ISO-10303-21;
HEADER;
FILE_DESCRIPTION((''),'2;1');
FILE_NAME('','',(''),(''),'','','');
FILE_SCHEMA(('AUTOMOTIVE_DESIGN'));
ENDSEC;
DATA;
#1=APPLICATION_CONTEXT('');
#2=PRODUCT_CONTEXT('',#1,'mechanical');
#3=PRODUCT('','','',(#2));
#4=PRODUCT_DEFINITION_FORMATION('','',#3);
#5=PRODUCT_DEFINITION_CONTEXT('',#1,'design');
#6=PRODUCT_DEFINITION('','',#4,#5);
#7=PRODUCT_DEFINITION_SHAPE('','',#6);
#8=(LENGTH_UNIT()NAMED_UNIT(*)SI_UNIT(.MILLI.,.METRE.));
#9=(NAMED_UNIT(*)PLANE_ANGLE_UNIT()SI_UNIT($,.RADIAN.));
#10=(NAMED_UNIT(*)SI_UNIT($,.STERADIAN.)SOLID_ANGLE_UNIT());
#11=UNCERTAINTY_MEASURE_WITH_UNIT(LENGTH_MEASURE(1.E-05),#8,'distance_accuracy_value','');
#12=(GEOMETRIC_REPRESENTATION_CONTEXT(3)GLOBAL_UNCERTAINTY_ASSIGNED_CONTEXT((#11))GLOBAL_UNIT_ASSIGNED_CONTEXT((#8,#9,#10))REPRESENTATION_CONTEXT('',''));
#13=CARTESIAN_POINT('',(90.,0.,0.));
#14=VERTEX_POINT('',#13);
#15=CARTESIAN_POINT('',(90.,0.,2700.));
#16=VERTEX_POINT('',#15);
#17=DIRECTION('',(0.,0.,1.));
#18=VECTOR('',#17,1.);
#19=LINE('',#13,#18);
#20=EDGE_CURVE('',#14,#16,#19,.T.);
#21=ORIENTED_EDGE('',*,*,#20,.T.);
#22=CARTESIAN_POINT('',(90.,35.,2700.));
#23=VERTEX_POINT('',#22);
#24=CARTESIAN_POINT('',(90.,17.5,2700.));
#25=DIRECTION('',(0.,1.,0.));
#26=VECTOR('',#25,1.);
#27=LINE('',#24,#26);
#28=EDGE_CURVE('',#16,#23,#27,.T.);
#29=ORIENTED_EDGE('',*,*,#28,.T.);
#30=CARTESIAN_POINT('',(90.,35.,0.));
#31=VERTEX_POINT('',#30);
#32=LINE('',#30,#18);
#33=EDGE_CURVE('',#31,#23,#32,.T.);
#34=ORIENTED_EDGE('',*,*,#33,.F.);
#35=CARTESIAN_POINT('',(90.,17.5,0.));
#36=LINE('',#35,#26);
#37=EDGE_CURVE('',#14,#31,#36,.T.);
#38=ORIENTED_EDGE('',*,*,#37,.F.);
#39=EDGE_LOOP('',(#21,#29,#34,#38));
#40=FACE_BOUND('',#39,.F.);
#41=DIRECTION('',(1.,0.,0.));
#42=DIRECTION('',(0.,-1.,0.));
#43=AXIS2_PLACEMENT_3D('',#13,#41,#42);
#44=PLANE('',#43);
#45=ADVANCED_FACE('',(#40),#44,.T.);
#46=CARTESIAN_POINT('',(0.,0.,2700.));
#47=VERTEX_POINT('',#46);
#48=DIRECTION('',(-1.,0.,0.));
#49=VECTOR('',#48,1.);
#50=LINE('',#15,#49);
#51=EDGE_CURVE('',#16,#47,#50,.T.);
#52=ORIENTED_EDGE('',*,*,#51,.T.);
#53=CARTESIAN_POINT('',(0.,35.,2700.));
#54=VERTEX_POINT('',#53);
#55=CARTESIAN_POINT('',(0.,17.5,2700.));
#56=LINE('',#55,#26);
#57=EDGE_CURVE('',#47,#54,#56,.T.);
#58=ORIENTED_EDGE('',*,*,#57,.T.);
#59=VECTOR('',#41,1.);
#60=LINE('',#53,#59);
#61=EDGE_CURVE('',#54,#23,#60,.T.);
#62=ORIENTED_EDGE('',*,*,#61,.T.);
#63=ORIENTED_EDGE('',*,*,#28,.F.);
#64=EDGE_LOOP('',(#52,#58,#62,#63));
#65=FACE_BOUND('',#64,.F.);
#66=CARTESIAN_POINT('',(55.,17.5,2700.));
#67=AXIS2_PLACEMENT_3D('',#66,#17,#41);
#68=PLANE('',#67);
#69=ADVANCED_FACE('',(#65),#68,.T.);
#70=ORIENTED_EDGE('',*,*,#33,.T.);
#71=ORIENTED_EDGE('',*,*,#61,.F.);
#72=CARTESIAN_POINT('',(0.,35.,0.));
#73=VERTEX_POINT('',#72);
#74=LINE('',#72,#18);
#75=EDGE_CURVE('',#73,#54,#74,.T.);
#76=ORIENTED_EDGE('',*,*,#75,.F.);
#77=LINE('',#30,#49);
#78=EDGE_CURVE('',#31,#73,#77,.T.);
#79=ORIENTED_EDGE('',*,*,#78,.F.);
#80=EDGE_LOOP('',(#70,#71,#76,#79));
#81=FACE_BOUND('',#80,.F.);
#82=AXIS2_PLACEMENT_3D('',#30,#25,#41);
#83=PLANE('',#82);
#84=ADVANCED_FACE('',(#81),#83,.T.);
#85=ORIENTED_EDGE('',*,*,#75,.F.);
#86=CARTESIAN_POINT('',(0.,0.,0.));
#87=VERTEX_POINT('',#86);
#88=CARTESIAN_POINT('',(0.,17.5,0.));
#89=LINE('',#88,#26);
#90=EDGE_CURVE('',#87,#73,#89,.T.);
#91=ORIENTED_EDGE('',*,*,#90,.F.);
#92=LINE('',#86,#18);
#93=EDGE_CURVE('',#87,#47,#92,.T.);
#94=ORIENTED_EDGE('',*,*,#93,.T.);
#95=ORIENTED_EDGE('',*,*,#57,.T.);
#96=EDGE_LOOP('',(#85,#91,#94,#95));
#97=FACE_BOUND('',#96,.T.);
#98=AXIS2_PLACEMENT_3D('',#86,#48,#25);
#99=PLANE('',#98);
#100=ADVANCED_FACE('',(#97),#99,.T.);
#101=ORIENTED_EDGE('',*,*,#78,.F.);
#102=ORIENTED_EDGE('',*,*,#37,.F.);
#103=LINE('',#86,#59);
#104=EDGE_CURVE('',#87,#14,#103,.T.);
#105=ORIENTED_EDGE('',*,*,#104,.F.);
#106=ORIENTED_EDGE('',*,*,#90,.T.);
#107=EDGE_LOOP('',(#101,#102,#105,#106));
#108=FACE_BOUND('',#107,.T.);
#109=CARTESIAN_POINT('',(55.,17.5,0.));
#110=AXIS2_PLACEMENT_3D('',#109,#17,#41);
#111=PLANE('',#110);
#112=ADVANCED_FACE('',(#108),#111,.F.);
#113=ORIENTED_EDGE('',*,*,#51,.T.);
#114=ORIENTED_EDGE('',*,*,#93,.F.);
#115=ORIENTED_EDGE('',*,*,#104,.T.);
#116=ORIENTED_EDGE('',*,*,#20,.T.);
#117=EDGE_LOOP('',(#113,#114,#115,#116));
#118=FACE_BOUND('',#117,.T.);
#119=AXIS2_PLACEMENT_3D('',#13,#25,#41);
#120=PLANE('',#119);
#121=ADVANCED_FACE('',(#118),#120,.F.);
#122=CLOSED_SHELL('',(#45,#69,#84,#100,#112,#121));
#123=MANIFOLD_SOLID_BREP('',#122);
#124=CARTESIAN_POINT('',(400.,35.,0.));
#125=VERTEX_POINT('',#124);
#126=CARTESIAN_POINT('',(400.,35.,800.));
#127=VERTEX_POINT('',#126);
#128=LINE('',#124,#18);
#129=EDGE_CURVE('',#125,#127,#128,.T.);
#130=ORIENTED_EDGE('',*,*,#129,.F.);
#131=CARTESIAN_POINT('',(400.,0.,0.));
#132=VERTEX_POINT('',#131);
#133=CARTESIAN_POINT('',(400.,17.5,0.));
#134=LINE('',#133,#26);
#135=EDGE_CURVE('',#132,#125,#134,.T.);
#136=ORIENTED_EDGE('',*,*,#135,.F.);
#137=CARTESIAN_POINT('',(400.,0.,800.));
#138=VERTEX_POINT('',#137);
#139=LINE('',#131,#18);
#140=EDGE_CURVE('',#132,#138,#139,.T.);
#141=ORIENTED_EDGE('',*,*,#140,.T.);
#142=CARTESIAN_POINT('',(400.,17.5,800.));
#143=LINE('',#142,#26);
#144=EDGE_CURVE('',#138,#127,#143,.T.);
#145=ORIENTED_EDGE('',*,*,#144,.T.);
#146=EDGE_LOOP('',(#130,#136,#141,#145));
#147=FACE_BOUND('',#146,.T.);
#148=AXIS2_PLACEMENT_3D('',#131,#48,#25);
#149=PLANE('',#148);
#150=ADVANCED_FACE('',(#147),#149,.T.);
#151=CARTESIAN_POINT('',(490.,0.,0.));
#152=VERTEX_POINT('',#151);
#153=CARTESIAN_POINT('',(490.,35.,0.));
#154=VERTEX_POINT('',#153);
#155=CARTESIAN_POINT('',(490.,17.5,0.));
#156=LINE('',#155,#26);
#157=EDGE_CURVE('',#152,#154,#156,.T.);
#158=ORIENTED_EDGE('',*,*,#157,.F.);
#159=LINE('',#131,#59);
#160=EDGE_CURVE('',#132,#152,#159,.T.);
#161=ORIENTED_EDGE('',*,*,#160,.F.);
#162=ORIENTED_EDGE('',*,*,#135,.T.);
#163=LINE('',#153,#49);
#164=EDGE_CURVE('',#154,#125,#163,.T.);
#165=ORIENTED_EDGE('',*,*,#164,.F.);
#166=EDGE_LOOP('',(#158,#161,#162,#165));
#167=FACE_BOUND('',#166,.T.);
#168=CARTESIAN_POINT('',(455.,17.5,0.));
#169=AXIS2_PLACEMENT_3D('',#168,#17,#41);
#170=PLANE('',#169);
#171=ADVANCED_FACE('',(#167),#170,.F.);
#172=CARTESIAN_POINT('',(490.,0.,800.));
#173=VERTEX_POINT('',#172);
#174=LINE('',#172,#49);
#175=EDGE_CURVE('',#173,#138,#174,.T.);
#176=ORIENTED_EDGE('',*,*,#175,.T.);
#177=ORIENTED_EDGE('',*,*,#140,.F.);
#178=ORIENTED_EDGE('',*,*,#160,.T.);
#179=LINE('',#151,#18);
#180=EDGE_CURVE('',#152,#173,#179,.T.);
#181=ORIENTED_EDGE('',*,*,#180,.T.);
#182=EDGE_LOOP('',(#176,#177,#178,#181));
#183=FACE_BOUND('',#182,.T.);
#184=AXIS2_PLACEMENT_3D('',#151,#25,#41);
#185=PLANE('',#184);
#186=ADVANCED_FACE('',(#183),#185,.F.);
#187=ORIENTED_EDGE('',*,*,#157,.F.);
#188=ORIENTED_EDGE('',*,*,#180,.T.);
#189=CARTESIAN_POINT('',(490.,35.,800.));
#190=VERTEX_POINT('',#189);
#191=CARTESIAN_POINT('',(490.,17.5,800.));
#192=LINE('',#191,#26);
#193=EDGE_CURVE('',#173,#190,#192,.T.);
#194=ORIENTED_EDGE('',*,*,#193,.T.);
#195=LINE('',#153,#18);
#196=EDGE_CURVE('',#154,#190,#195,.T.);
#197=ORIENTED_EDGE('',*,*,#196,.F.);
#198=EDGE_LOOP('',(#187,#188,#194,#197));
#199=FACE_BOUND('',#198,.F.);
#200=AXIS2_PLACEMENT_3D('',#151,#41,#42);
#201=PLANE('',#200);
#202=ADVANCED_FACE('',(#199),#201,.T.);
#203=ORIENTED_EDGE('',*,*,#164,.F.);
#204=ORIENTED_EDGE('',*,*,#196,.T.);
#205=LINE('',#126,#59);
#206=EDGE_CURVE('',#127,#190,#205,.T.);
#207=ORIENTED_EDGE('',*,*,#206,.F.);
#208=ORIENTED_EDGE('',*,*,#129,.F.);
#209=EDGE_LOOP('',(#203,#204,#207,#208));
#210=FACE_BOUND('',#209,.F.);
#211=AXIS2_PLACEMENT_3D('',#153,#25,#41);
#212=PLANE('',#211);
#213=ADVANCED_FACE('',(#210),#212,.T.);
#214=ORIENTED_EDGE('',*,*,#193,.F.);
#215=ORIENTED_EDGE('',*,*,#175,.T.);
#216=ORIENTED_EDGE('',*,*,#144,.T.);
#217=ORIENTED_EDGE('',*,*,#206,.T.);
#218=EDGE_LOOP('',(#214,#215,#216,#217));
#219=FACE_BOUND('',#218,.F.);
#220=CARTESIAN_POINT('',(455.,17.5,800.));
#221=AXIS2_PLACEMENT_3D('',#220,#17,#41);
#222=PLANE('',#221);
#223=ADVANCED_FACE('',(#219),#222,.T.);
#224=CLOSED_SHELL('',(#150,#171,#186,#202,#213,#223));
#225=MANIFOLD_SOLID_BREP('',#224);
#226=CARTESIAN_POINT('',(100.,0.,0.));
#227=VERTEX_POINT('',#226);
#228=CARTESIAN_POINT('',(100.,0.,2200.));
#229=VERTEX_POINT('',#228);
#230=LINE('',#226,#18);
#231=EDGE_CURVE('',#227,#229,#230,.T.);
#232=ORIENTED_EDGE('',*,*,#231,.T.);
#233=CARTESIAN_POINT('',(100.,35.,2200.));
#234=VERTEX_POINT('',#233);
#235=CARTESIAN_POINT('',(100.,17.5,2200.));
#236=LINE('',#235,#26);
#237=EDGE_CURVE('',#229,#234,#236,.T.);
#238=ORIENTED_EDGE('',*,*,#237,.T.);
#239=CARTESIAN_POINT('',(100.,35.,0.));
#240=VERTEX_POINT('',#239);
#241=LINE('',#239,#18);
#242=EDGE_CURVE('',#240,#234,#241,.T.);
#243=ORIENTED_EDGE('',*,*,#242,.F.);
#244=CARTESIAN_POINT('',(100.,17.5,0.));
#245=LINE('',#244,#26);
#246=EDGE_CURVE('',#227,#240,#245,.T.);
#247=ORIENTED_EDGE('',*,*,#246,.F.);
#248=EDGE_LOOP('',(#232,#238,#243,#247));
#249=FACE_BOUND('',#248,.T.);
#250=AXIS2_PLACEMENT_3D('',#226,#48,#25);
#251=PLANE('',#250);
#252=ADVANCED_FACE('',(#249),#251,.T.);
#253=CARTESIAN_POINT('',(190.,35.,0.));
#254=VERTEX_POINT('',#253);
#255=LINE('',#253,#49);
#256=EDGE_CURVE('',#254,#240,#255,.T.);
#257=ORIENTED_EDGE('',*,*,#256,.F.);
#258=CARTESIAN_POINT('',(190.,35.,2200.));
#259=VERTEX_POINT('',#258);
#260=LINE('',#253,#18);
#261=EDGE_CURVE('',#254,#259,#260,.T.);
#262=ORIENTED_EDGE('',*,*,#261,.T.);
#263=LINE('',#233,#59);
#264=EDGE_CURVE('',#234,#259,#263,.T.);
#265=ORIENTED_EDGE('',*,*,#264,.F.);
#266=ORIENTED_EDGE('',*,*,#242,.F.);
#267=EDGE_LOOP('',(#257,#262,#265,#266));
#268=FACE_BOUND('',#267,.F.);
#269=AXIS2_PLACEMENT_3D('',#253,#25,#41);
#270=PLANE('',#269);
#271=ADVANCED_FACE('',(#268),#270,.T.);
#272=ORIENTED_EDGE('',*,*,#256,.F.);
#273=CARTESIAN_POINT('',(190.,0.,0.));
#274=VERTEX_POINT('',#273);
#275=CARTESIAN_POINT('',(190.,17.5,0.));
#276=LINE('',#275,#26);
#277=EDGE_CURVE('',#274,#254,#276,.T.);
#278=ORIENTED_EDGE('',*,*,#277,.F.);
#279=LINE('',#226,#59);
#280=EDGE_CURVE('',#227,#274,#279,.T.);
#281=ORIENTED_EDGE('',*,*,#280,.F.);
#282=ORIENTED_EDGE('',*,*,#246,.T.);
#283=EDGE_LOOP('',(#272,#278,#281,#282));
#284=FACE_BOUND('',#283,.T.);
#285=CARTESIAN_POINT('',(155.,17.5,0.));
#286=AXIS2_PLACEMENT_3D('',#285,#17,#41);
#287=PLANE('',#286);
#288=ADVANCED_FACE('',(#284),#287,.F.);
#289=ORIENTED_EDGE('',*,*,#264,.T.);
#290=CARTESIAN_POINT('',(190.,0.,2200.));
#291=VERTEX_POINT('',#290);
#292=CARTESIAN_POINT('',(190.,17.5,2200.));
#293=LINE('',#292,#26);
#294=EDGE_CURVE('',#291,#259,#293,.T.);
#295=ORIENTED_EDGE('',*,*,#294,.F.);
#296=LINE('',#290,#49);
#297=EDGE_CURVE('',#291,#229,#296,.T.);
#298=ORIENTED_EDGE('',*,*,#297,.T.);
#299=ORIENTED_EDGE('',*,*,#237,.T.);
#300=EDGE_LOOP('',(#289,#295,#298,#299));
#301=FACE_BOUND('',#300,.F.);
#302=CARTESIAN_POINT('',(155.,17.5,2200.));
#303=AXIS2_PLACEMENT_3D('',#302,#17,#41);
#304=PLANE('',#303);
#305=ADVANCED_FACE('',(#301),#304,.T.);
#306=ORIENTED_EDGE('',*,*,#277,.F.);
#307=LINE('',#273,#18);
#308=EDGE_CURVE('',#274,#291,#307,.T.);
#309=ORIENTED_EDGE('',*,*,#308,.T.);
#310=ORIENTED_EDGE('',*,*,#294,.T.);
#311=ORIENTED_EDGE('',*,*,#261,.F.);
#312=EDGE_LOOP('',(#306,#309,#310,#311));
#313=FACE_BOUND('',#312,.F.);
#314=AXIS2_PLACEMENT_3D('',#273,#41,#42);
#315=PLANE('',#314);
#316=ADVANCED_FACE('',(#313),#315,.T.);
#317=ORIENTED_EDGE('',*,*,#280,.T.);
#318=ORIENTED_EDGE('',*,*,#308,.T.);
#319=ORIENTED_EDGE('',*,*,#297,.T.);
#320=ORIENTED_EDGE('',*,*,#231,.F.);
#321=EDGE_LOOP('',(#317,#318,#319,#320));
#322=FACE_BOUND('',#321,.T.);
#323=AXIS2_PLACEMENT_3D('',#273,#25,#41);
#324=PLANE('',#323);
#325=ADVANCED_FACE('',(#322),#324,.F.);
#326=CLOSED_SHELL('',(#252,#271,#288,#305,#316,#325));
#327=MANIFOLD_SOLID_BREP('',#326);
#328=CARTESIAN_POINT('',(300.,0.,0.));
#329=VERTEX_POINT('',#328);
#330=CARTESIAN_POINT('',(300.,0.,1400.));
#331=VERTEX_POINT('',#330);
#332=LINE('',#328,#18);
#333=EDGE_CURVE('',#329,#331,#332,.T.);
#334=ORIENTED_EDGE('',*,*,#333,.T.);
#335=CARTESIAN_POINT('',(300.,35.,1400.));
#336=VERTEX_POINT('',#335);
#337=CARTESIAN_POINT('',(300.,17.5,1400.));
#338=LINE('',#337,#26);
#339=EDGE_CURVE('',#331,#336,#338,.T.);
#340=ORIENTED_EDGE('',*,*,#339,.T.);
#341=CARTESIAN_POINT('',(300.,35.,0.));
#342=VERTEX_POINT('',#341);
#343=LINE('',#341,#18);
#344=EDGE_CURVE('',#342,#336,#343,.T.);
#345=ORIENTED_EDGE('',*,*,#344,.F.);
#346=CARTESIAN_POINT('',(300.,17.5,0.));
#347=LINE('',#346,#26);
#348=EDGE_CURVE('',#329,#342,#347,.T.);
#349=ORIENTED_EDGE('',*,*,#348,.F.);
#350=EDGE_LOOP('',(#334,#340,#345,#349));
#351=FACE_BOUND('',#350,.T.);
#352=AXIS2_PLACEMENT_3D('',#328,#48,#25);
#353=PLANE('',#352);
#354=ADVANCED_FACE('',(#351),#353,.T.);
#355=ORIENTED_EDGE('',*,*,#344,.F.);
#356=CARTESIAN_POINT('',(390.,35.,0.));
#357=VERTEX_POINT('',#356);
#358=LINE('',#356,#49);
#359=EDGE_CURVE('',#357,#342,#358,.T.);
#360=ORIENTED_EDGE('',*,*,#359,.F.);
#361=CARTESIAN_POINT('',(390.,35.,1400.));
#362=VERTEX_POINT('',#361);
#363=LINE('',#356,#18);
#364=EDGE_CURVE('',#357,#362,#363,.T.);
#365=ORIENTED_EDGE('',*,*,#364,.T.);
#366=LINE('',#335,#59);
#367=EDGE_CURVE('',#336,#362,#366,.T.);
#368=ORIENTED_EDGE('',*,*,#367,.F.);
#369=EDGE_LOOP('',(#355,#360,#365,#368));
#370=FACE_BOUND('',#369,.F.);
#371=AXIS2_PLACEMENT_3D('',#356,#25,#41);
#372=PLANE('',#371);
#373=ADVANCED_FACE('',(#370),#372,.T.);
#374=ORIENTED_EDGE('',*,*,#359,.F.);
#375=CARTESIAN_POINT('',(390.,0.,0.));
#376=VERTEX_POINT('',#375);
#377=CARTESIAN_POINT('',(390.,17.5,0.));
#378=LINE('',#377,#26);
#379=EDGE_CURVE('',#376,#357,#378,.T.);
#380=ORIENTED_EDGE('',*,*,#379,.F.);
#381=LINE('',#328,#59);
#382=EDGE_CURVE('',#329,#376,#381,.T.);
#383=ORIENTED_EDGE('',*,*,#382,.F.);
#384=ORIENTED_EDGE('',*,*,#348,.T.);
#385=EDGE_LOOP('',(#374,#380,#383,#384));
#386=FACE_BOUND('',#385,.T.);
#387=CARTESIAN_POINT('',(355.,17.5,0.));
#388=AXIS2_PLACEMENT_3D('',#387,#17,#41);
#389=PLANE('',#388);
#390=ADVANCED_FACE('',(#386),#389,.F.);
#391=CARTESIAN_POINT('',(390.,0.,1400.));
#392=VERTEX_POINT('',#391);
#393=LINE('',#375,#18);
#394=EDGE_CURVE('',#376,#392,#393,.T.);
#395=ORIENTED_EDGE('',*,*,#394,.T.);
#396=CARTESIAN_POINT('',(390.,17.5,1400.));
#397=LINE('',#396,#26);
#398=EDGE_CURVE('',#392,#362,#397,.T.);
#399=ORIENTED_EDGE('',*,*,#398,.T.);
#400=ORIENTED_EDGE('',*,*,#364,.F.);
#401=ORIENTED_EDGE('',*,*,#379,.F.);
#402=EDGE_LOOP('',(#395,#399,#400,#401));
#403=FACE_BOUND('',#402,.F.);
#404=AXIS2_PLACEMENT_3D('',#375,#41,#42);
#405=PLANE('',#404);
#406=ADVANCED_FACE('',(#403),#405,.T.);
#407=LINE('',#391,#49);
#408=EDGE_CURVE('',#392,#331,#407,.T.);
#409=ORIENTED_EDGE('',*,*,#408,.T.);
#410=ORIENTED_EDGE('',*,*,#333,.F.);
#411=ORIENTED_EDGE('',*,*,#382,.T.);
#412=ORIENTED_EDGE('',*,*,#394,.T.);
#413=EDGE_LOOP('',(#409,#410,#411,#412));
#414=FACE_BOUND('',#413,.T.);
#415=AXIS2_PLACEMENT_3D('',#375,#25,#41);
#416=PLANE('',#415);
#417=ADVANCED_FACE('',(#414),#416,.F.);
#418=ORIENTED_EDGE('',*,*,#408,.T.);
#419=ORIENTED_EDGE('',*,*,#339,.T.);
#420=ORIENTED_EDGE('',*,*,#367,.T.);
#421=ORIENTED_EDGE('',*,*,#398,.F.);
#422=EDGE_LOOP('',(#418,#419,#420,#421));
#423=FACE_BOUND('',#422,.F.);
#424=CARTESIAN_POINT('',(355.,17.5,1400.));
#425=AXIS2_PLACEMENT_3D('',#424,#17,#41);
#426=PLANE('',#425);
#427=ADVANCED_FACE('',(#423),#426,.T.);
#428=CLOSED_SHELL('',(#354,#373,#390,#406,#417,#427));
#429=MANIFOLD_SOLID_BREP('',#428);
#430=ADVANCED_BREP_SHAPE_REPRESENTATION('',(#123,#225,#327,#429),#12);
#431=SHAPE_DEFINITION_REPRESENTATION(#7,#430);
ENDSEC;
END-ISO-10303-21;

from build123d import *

# Parameters (mm, degrees)
F0_W     = 70
F0_H     = 35
F1_DEPTH = 2700
F2_DEPTH = 2200
F3_DEPTH = 1400
F4_DEPTH = 800


# Not quite as in the source:
# - a pattern or mirror of a feature is missing from the dataset's text; its kind, count and spacing are read off the source's solid


with BuildPart() as f1:
    # F0 (on Top) → F1 (new body)
    with BuildSketch(Plane.XY):
        with Locations((35, 17.5)):
            Rectangle(F0_W, F0_H)
    extrude(amount=F1_DEPTH)

    # F1_copies: F1 across plane


with BuildPart() as f1_1:
    add(f1.part)
    add(f1.part.mirror(Plane(origin=(45, 0, 0), x_dir=(0, 0, 1), z_dir=(1, 0, 0))))


with BuildPart() as f2:
    # F0 (on Top) → F2 (new body)
    with BuildSketch(Plane.XY):
        with Locations((135, 17.5)):
            Rectangle(F0_W, F0_H)
    extrude(amount=F2_DEPTH)

    # F2_copies: F2 across plane


with BuildPart() as f2_1:
    add(f2.part)
    add(f2.part.mirror(Plane(origin=(145, 0, 0), x_dir=(0, 0, 1), z_dir=(1, 0, 0))))


with BuildPart() as f3:
    # F0 (on Top) → F3 (new body)
    with BuildSketch(Plane.XY):
        with Locations((335, 17.5)):
            Rectangle(F0_W, F0_H)
    extrude(amount=F3_DEPTH)

    # F3_copies: F3 across plane


with BuildPart() as f3_1:
    add(f3.part)
    add(f3.part.mirror(Plane(origin=(345, 0, 0), x_dir=(0, 0, 1), z_dir=(1, 0, 0))))


with BuildPart() as f4:
    # F0 (on Top) → F4 (new body)
    with BuildSketch(Plane.XY):
        with Locations((435, 17.5)):
            Rectangle(F0_W, F0_H)
    extrude(amount=F4_DEPTH)

    # F4_copies: F4 across plane


with BuildPart() as f4_1:
    add(f4.part)
    add(f4.part.mirror(Plane(origin=(445, 0, 0), x_dir=(0, 0, 1), z_dir=(1, 0, 0))))


solid = Compound([f1_1.part, f2_1.part, f3_1.part, f4_1.part])
